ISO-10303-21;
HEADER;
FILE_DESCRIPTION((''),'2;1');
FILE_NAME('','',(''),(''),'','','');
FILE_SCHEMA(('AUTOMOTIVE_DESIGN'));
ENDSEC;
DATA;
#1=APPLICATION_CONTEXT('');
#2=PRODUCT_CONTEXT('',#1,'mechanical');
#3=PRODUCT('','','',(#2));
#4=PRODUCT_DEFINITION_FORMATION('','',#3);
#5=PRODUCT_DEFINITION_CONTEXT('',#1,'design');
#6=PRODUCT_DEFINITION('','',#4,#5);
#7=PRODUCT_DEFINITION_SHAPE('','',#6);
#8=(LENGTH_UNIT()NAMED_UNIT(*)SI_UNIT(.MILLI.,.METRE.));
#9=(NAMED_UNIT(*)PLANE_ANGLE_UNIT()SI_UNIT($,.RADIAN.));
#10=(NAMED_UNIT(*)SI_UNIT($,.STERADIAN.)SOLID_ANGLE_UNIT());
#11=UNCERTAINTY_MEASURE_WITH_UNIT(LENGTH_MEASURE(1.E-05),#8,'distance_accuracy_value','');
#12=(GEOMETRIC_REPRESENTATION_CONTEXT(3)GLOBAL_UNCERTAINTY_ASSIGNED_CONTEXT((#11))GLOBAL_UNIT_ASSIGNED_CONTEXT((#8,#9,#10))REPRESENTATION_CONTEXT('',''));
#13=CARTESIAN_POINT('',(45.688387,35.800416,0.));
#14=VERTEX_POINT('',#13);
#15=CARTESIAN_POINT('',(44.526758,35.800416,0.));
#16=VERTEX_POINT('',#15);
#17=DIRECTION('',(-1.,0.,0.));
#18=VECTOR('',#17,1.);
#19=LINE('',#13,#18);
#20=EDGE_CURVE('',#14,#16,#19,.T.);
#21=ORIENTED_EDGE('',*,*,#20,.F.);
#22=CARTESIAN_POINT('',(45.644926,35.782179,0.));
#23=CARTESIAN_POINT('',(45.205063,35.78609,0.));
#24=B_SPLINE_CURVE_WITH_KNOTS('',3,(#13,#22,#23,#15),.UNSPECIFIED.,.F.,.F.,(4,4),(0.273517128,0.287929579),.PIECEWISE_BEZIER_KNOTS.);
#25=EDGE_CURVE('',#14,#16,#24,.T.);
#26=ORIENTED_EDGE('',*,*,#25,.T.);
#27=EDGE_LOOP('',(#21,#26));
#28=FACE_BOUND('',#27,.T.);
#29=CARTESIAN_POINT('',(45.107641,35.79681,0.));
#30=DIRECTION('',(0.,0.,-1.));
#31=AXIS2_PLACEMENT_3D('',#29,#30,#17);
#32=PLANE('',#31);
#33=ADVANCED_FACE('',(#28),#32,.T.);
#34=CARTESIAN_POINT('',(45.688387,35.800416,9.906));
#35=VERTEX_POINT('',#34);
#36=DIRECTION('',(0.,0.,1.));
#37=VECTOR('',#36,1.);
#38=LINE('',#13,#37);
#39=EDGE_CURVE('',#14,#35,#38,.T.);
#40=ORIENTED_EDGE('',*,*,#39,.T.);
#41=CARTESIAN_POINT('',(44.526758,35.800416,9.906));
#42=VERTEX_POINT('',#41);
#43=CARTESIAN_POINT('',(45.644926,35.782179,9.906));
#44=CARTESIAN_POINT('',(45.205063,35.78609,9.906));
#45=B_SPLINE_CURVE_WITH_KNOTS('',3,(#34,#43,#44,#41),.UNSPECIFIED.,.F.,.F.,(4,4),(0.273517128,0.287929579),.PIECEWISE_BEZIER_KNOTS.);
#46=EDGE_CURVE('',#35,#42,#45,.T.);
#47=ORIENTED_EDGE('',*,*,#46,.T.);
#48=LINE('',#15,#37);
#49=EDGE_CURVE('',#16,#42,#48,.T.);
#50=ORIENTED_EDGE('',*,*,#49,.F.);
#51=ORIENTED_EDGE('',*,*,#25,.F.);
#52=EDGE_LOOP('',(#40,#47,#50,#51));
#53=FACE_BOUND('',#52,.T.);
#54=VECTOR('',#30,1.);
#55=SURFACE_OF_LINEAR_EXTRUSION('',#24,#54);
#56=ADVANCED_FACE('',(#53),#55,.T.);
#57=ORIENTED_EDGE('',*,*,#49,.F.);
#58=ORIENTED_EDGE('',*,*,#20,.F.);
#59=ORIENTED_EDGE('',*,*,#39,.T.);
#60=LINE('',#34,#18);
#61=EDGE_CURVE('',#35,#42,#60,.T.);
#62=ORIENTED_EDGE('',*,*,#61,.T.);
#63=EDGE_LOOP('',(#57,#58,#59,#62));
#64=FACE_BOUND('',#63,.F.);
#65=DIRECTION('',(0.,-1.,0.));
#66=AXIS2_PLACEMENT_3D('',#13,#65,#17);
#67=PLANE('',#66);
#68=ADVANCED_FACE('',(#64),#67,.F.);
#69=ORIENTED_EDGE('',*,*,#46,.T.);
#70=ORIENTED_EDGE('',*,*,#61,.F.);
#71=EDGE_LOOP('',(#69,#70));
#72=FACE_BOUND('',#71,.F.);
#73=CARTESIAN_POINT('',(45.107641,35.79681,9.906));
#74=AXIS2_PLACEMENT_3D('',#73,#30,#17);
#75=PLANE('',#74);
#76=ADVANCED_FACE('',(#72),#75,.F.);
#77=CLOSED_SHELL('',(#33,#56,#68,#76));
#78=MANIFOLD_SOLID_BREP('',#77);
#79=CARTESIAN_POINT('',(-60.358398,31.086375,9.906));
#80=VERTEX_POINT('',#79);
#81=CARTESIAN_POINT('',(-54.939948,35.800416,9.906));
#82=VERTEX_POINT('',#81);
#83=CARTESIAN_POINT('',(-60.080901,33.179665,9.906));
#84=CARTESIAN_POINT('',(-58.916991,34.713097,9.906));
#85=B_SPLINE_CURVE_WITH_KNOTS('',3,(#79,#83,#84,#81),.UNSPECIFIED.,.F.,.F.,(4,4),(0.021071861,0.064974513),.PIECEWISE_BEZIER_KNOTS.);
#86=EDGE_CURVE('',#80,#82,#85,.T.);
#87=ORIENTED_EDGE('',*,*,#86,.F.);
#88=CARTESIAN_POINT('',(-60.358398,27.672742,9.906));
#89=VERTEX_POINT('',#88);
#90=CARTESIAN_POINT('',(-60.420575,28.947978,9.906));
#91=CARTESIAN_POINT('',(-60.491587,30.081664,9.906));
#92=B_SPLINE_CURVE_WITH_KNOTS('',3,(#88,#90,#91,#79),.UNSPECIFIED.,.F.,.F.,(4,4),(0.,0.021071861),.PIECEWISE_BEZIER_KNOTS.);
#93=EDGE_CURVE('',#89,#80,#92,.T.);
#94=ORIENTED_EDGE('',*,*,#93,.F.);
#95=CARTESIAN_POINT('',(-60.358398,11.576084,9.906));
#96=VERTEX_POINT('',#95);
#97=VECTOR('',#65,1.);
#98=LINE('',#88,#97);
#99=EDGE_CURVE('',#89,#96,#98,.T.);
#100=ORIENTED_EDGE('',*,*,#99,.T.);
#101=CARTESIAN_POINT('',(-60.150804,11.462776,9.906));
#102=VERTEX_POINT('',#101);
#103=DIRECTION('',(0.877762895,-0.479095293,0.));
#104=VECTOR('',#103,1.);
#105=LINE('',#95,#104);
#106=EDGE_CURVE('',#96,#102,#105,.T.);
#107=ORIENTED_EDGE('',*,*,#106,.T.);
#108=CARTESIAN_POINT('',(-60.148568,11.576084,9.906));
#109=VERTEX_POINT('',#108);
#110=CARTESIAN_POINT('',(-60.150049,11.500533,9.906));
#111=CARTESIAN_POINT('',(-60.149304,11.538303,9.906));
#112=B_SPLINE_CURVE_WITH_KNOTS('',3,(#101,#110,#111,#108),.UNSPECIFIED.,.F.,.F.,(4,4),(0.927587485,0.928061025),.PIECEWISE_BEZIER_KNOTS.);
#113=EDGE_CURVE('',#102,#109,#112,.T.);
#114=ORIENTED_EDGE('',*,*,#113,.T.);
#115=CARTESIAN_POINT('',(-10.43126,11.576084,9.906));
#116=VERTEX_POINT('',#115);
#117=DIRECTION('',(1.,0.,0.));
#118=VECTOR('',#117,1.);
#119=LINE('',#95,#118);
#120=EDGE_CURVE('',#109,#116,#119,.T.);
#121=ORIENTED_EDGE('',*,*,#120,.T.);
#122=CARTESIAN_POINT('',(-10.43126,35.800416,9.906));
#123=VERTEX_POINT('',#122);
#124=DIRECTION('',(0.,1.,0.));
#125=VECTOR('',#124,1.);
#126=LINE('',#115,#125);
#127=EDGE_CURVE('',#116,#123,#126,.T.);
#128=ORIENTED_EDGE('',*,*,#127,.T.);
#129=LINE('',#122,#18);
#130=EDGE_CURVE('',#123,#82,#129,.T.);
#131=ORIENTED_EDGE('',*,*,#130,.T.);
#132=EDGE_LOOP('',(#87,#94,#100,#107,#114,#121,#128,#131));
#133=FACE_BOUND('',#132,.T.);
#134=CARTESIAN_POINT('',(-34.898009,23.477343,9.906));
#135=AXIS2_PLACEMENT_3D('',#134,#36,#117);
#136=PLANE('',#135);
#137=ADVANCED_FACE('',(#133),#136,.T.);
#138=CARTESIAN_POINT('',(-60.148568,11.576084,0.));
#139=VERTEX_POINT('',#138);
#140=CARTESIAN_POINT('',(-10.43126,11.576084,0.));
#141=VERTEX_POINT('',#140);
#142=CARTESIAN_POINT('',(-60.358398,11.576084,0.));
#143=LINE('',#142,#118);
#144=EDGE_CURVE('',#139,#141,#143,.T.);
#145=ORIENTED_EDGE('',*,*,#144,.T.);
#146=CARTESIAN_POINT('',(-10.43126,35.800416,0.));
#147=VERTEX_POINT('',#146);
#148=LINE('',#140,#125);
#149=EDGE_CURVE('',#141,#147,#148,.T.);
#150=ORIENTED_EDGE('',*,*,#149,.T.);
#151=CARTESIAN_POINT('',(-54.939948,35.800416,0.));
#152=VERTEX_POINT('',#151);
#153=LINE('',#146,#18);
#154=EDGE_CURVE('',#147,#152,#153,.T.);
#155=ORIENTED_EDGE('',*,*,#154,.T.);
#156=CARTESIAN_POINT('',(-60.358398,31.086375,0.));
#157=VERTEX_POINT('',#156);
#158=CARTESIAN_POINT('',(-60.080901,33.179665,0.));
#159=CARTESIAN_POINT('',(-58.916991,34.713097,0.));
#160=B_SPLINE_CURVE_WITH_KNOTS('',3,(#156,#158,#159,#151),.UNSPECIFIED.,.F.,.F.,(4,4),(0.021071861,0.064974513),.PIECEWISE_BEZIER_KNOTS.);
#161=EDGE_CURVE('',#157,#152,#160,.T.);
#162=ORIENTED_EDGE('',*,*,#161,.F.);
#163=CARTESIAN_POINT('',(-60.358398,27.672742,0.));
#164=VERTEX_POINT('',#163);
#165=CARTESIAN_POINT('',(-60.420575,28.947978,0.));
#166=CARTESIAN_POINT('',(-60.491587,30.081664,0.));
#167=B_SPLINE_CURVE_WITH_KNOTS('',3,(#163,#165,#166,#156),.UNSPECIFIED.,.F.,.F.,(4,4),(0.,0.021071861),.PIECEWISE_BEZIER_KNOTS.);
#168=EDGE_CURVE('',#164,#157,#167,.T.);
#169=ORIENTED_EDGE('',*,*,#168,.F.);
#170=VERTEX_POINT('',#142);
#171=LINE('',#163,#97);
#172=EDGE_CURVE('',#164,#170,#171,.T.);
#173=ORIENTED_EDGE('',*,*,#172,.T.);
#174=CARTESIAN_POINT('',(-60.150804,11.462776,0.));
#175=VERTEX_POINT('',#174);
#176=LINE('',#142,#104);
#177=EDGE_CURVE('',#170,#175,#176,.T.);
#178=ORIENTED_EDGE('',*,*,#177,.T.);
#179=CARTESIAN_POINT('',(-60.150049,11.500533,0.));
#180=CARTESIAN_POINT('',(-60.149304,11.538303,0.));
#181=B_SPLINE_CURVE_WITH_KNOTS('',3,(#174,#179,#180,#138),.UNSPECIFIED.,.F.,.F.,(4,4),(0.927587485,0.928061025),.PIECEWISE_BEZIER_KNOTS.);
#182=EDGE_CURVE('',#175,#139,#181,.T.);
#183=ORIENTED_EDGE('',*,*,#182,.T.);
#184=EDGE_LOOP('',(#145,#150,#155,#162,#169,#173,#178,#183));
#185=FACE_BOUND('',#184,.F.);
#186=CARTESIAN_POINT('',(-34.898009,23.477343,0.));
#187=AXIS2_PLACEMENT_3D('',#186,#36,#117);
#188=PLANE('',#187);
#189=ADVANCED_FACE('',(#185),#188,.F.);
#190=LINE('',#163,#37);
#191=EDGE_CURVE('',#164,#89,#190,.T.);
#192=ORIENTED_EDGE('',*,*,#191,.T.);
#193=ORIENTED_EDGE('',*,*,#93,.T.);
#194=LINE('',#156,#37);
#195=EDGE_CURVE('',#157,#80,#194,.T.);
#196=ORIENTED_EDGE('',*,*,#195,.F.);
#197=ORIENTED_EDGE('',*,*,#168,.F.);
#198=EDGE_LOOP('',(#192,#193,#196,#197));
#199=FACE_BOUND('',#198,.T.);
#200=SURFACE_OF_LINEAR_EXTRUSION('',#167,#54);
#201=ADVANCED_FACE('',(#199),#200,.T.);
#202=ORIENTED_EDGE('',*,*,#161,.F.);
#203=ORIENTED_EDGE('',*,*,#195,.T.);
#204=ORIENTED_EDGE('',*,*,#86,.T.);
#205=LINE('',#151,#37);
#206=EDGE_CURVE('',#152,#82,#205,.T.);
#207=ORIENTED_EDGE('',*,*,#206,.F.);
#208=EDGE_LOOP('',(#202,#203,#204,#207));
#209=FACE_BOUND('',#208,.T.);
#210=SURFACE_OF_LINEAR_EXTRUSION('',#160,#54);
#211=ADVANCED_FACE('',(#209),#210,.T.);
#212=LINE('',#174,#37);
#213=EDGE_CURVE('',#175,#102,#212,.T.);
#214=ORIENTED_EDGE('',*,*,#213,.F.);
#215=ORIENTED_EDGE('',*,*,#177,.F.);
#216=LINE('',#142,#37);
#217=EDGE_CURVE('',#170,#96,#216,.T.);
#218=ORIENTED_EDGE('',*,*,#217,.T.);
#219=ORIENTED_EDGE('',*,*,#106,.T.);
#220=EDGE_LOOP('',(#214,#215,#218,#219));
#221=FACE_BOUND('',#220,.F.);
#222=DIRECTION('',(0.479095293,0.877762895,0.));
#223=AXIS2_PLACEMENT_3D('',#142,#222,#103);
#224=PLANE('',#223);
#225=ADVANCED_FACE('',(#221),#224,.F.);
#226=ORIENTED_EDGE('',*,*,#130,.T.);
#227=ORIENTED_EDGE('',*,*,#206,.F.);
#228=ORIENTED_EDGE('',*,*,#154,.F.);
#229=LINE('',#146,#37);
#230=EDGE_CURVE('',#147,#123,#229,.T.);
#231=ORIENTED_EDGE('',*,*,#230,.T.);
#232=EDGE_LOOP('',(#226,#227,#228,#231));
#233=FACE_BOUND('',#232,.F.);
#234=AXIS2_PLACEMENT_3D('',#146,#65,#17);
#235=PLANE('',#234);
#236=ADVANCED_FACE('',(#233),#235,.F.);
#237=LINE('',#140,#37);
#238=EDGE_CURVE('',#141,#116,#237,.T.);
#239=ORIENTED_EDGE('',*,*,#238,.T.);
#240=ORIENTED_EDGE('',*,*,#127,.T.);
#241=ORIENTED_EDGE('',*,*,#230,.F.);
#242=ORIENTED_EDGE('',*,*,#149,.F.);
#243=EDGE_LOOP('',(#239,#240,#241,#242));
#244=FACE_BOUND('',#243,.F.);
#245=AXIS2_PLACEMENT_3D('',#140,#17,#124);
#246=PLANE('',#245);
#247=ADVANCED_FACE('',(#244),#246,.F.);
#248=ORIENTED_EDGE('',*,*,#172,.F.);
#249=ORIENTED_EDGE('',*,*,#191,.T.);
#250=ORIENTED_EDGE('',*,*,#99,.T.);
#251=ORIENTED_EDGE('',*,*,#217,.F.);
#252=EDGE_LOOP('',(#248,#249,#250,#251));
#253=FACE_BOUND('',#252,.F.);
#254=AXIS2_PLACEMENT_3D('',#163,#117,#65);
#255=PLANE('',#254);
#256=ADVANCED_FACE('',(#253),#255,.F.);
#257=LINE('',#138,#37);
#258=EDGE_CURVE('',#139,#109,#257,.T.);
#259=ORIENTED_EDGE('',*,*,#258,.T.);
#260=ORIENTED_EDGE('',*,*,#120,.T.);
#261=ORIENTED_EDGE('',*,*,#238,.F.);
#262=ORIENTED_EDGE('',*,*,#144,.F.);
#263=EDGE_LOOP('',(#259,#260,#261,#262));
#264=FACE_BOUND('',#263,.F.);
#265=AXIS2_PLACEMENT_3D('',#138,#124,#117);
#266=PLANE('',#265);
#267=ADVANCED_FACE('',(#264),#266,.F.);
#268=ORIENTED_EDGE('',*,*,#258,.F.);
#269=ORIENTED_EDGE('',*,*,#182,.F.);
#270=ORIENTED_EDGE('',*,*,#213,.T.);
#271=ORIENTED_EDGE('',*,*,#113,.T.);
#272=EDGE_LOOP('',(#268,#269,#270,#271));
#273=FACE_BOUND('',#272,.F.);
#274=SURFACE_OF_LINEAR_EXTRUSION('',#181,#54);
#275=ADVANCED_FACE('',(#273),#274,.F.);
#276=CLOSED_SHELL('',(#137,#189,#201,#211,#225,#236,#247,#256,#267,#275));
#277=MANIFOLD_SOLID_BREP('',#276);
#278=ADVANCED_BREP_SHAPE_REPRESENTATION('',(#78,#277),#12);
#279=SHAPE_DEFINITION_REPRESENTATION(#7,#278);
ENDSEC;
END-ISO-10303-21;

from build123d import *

# Parameters (mm, degrees)
F1_DEPTH = 9.906


with BuildPart() as f1:
    # F0 (on Top) → F1 (new body)
    with BuildSketch(Plane.XY):
        with BuildLine():
            Line((-10.4312598705, 35.8004160225), (-54.9399480224, 35.8004160225))
            add(Edge.make_bspline(
                [(-60.3583976626, 31.0863752262), (-60.0809005567, 33.179664896), (-58.9169910224, 34.7130967666), (-54.9399480224, 35.8004160225)],
                knots=[0.0210718605, 0.0210718605, 0.0210718605, 0.0210718605, 0.064974513, 0.064974513, 0.064974513, 0.064974513], degree=3))
            Line((-60.3583976626, 31.0863752262), (-60.3583976626, 27.6727415621))
            add(Edge.make_bspline(
                [(-60.1485681557, 11.5760835991), (-60.0368279013, 17.3156575533), (-60.1461253425, 23.3191062374), (-60.3583976626, 27.6727415621)],
                knots=[0.9280610246, 0.9280610246, 0.9280610246, 0.9280610246, 1, 1, 1, 1], degree=3))
            Line((-60.1485681557, 11.5760835991), (-10.4312598705, 11.5760835991))
            Line((-10.4312598705, 11.5760835991), (-10.4312598705, 35.8004160225))
        make_face()
        with BuildLine():
            Line((-60.3583976626, 27.6727415621), (-60.3583976626, 31.0863752262))
            add(Edge.make_bspline(
                [(-60.3583976626, 27.6727415621), (-60.4205749831, 28.9479779122), (-60.4915873444, 30.0816635409), (-60.3583976626, 31.0863752262)],
                knots=[0, 0, 0, 0, 0.0210718605, 0.0210718605, 0.0210718605, 0.0210718605], degree=3))
        make_face()
        with BuildLine():
            add(Edge.make_bspline(
                [(-60.1485681557, 11.5760835991), (-60.0368279013, 17.3156575533), (-60.1461253425, 23.3191062374), (-60.3583976626, 27.6727415621)],
                knots=[0.9280610246, 0.9280610246, 0.9280610246, 0.9280610246, 1, 1, 1, 1], degree=3))
            Line((-60.3583976626, 27.6727415621), (-60.3583976626, 11.5760835991))
            Line((-60.3583976626, 11.5760835991), (-60.1485681557, 11.5760835991))
        make_face()
        with BuildLine():
            add(Edge.make_bspline(
                [(-60.1508035203, 11.4627758061), (-60.1500487989, 11.500533273), (-60.1493036885, 11.5383027192), (-60.1485681557, 11.5760835991)],
                knots=[0.9275874847, 0.9275874847, 0.9275874847, 0.9275874847, 0.9280610246, 0.9280610246, 0.9280610246, 0.9280610246], degree=3))
            Line((-60.1485681557, 11.5760835991), (-60.3583976626, 11.5760835991))
            Line((-60.3583976626, 11.5760835991), (-60.1508035203, 11.4627758061))
        make_face()
    extrude(amount=F1_DEPTH)


with BuildPart() as f1b:
    # F0 (on Top) → F1, piece 2 (new body)
    with BuildSketch(Plane.XY):
        with BuildLine():
            add(Edge.make_bspline(
                [(45.6883870065, 35.8004160225), (45.6449263149, 35.7821790971), (45.2050634069, 35.7860902012), (44.5267579401, 35.8004160225)],
                knots=[0.2735171284, 0.2735171284, 0.2735171284, 0.2735171284, 0.2879295785, 0.2879295785, 0.2879295785, 0.2879295785], degree=3))
            Line((45.6883870065, 35.8004160225), (44.5267579401, 35.8004160225))
        make_face()
    extrude(amount=F1_DEPTH)


solid = Compound([f1.part, f1b.part])
